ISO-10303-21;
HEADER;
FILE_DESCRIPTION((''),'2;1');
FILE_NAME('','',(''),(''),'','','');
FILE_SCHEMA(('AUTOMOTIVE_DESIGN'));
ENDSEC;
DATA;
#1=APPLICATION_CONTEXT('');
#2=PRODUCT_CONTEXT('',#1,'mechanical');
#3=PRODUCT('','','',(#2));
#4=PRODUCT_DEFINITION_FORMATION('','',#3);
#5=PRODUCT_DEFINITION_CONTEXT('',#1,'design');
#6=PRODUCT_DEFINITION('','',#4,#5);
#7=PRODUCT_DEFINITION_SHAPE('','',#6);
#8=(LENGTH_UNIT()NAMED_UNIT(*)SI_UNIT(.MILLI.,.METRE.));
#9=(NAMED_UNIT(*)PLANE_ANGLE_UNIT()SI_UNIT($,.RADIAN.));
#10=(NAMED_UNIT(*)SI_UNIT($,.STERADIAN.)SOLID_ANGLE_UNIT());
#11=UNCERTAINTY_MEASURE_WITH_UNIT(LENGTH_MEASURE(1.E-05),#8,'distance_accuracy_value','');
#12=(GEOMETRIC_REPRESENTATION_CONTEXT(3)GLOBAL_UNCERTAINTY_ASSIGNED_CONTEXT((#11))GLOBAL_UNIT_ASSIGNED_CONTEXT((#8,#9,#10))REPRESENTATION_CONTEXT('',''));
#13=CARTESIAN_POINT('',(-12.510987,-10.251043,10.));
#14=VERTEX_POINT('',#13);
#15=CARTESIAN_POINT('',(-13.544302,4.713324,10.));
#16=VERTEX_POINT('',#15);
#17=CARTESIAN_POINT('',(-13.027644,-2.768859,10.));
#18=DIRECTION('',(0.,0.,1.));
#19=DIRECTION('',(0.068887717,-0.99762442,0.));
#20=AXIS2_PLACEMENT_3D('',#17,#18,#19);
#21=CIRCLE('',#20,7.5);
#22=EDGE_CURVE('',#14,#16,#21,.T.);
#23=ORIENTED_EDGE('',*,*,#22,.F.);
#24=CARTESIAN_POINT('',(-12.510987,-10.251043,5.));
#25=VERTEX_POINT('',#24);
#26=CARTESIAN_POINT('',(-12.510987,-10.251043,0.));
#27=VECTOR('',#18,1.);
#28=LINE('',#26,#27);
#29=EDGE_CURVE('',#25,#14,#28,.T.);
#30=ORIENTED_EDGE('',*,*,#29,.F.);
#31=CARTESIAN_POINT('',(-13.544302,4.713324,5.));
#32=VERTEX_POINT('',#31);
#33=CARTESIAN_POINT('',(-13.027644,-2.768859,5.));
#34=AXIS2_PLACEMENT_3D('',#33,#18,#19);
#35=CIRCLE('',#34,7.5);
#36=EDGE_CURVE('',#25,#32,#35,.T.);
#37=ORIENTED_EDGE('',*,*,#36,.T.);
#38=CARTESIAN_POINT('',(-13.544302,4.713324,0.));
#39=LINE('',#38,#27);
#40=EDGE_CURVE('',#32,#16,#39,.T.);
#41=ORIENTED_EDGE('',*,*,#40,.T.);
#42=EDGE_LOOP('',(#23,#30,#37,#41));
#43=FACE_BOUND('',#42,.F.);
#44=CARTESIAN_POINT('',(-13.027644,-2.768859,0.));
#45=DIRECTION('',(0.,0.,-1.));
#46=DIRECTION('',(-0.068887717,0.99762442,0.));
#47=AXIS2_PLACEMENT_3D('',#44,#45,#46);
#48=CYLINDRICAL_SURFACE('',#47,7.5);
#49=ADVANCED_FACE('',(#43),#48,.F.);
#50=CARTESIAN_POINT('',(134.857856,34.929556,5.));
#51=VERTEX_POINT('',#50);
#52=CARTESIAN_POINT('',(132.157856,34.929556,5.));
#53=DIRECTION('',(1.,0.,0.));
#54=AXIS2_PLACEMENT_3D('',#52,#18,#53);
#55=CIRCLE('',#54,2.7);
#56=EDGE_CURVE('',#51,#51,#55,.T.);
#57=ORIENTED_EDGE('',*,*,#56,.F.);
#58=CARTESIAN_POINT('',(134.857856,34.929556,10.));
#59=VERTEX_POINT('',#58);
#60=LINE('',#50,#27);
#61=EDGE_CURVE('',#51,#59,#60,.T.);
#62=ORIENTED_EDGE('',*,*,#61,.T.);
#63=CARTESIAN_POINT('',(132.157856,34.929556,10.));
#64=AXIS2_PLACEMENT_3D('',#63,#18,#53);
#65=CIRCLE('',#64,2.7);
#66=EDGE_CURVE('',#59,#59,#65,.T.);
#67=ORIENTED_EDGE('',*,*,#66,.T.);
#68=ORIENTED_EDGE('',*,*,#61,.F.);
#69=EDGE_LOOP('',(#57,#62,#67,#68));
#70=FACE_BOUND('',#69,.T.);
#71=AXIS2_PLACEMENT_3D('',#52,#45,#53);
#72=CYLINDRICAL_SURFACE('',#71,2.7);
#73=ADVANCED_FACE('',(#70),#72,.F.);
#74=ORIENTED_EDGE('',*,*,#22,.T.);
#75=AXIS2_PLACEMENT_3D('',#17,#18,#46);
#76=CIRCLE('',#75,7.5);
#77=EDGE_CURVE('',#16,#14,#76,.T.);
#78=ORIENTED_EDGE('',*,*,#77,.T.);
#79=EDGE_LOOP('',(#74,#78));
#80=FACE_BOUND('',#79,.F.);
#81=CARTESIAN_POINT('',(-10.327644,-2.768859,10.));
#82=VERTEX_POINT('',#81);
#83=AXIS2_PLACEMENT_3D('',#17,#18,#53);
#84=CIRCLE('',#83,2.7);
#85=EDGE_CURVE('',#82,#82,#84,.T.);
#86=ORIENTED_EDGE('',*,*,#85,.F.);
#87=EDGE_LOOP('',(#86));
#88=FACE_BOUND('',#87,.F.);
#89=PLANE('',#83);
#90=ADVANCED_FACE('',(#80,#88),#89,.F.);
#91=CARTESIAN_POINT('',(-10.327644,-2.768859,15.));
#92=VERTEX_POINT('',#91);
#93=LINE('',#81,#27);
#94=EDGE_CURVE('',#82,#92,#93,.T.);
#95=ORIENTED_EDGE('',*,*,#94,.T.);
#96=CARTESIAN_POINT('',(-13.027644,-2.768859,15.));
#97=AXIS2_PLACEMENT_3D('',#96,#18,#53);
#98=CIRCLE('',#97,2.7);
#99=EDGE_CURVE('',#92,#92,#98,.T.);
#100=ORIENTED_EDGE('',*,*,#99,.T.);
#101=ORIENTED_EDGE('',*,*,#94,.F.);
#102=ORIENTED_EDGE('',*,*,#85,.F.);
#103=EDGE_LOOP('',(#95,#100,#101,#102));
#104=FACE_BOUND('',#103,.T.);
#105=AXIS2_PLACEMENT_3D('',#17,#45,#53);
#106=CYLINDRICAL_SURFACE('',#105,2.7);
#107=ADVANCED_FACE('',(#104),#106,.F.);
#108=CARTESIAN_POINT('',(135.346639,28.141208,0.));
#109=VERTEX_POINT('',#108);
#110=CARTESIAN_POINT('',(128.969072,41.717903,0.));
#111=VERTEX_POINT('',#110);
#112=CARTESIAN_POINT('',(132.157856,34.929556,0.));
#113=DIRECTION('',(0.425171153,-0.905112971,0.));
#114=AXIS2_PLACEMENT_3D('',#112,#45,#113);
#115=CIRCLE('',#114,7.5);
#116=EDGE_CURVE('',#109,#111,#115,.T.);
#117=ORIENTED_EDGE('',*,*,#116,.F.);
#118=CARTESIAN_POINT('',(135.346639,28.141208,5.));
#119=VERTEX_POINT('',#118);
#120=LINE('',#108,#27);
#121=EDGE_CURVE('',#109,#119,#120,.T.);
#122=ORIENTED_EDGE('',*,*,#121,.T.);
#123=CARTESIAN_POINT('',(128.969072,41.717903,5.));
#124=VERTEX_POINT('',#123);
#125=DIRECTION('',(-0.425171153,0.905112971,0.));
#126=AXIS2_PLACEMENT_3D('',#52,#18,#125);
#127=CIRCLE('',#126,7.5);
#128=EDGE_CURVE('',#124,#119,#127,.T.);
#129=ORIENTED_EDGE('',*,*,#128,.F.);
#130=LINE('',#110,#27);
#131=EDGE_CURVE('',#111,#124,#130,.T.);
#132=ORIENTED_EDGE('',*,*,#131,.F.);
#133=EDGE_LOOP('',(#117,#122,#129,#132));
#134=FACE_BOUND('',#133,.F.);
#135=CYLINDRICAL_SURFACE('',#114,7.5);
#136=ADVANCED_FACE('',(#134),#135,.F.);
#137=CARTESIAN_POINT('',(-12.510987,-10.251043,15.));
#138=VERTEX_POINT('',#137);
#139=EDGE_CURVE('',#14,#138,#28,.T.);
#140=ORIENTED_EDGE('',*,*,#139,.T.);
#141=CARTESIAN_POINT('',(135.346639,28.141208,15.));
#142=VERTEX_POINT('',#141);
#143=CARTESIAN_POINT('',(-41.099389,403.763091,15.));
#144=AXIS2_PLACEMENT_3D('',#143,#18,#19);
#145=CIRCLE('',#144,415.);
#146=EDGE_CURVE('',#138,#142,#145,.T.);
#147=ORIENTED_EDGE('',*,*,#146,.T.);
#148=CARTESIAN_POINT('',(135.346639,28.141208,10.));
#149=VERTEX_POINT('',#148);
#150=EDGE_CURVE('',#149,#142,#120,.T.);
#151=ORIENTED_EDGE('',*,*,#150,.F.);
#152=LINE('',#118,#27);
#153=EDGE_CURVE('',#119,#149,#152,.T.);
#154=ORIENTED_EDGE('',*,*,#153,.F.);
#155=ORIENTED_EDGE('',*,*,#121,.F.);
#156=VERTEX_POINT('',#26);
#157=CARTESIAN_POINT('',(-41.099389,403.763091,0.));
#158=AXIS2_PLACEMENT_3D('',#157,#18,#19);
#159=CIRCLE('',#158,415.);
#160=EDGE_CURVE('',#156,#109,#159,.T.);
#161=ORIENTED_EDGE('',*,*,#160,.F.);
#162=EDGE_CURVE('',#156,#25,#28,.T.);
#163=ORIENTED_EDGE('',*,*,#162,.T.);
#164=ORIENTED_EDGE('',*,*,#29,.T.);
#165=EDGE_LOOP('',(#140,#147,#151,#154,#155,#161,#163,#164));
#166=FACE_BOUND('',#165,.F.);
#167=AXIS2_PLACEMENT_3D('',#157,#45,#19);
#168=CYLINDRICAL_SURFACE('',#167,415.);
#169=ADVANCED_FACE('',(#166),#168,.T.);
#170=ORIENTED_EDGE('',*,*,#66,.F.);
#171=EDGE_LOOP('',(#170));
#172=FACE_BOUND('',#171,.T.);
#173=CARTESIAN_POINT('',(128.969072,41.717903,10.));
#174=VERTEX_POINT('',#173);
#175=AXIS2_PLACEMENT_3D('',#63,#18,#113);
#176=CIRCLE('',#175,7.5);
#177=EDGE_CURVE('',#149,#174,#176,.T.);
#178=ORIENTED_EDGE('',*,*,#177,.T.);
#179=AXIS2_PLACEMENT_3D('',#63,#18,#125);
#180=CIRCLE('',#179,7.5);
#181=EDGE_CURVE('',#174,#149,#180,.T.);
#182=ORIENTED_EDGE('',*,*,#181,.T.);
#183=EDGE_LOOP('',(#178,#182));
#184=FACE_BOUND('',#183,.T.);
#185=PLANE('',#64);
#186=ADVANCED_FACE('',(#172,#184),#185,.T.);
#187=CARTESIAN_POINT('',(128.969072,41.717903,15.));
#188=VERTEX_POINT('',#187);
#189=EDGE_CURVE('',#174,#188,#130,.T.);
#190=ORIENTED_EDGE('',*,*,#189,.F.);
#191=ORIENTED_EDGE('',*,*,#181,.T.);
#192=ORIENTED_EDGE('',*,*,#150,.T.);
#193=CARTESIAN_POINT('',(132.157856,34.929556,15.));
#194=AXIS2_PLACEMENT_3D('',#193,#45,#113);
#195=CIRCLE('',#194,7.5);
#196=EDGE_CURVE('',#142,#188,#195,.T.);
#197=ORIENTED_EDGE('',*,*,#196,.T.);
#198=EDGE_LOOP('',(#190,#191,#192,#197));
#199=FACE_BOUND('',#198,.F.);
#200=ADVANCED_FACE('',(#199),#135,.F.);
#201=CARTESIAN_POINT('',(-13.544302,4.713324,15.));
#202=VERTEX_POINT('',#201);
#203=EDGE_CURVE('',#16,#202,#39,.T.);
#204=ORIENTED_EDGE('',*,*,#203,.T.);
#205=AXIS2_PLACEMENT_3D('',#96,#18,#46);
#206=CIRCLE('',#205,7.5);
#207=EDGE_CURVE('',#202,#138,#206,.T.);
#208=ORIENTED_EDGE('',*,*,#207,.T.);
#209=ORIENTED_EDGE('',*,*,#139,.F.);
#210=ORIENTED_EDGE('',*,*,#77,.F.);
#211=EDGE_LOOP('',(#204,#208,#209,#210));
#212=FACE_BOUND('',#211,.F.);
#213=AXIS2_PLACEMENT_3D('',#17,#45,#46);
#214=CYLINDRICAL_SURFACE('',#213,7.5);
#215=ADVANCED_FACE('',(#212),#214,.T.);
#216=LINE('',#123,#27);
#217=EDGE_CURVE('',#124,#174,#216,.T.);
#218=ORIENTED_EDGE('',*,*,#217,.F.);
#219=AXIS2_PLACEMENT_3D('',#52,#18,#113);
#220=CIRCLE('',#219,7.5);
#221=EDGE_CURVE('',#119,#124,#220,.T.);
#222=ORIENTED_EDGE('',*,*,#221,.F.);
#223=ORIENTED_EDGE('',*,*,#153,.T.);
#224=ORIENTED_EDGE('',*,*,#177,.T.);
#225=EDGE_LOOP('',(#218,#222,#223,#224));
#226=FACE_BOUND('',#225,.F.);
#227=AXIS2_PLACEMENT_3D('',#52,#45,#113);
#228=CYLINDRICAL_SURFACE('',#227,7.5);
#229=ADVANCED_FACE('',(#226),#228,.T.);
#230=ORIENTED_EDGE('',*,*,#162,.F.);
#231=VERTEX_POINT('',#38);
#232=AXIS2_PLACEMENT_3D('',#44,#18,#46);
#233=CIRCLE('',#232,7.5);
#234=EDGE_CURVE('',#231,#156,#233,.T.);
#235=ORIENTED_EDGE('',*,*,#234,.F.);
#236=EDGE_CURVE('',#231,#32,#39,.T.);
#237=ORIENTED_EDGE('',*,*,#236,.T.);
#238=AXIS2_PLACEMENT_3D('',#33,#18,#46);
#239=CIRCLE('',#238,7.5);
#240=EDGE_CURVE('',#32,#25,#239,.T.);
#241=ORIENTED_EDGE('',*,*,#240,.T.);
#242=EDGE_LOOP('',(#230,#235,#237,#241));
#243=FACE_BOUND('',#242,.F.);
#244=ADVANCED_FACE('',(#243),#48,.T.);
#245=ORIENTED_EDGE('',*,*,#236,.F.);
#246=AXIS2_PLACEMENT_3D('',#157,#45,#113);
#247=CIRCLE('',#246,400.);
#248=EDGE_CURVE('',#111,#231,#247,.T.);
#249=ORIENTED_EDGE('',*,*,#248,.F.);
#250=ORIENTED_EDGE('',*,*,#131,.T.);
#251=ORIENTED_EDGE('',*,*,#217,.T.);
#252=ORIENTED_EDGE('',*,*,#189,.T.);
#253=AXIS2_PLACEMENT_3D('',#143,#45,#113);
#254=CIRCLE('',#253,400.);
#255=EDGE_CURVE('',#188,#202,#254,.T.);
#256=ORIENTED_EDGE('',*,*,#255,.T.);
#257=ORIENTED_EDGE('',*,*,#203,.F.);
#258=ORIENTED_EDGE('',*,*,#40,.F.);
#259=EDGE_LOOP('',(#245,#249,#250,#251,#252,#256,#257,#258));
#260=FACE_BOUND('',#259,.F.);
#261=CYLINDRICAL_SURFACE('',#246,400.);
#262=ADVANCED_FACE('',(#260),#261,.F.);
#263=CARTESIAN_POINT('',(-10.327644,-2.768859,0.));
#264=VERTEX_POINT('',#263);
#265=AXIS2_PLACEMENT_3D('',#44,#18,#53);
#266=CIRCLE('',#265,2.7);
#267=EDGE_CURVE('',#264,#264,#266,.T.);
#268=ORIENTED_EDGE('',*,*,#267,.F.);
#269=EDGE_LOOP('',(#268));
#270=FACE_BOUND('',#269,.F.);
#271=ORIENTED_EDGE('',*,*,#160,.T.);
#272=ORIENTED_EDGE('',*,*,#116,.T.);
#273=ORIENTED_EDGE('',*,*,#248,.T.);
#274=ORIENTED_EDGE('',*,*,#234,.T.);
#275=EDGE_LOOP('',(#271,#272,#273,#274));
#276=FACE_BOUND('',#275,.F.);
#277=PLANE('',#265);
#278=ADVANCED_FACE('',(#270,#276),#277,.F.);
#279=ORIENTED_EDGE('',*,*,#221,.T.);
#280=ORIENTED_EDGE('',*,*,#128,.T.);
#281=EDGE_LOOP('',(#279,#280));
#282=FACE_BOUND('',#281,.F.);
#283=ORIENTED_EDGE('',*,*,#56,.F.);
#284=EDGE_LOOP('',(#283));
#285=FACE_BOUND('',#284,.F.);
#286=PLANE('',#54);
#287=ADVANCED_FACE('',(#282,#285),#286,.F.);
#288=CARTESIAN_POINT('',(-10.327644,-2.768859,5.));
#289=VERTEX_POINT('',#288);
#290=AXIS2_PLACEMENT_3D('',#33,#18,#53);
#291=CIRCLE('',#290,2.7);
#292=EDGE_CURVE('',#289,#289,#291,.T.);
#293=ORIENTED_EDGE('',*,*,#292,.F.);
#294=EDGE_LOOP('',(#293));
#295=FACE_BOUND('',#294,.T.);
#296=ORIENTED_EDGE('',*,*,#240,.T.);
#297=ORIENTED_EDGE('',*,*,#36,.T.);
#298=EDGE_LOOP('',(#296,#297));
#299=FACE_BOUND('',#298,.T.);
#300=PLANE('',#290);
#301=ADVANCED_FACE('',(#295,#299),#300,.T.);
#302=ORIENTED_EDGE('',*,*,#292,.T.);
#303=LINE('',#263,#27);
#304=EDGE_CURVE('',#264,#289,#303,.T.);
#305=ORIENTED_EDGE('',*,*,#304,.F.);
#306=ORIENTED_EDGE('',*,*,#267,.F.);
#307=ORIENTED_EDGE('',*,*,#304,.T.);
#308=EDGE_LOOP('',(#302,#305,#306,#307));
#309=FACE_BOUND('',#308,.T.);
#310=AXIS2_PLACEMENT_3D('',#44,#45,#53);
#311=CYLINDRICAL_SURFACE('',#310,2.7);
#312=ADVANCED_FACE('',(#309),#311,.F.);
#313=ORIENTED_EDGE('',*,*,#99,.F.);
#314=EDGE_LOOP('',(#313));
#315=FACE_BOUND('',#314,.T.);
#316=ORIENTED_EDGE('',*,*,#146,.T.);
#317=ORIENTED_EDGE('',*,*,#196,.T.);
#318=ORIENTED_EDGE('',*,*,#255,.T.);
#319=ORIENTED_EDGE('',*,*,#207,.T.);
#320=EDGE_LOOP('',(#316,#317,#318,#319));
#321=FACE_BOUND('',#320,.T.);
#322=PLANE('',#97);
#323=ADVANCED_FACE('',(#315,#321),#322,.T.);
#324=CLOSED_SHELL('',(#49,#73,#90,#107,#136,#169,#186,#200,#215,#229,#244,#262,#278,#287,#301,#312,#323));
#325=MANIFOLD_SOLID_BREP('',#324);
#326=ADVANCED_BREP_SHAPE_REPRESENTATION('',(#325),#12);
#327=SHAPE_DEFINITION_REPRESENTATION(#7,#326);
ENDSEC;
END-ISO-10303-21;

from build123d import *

# Parameters (mm, degrees)
F1_DEPTH = 15
F0_R     = 2.7
F2_DEPTH = 5
F3_START = 10
F3_DEPTH = 5
F4_START = 5
F4_DEPTH = 5


with BuildPart() as f1:
    # F0 (on Top) → F1 (new body)
    with BuildSketch(Plane.XY):
        with BuildLine():
            ThreePointArc((128.9690721838, 41.7179030249), (59.4297181842, 16.601757413), (-13.5443023154, 4.7133236555))
            ThreePointArc((-13.5443023154, 4.7133236555), (-5.5454612916, -2.2522016138), (-12.5109865609, -10.2510426376))
            ThreePointArc((-12.5109865609, -10.2510426376), (63.1995597074, 2.0832073859), (135.346639482, 28.1412084582))
            ThreePointArc((135.346639482, 28.1412084582), (125.3695085496, 31.7407720924), (128.9690721838, 41.7179030249))
        make_face()
    extrude(amount=F1_DEPTH)

    # F0 (on Top) → F2 (join)
    with BuildSketch(Plane.XY):
        with BuildLine():
            ThreePointArc((-12.5109865609, -10.2510426376), (-5.5454612916, -2.2522016138), (-13.5443023154, 4.7133236555))
            ThreePointArc((-13.5443023154, 4.7133236555), (-20.5098275846, -3.2855173683), (-12.5109865609, -10.2510426376))
        make_face()
        with Locations((-13.0276444381, -2.768859491)):
            Circle(F0_R, mode=Mode.SUBTRACT)
    extrude(amount=F2_DEPTH)

    # F0 (on Top) → F3 (join)
    with BuildSketch(Plane.XY.offset(F3_START)):
        with BuildLine():
            ThreePointArc((-12.5109865609, -10.2510426376), (-5.5454612916, -2.2522016138), (-13.5443023154, 4.7133236555))
            ThreePointArc((-13.5443023154, 4.7133236555), (-20.5098275846, -3.2855173683), (-12.5109865609, -10.2510426376))
        make_face()
        with Locations((-13.0276444381, -2.768859491)):
            Circle(F0_R, mode=Mode.SUBTRACT)
    extrude(amount=F3_DEPTH)

    # F0 (on Top) → F4 (join)
    with BuildSketch(Plane.XY.offset(F4_START)):
        with BuildLine():
            ThreePointArc((135.346639482, 28.1412084582), (138.9462031162, 38.1183393907), (128.9690721838, 41.7179030249))
            ThreePointArc((128.9690721838, 41.7179030249), (125.3695085496, 31.7407720924), (135.346639482, 28.1412084582))
        make_face()
        with Locations((132.1578558329, 34.9295557416)):
            Circle(F0_R, mode=Mode.SUBTRACT)
    extrude(amount=F4_DEPTH)


solid = f1.part
